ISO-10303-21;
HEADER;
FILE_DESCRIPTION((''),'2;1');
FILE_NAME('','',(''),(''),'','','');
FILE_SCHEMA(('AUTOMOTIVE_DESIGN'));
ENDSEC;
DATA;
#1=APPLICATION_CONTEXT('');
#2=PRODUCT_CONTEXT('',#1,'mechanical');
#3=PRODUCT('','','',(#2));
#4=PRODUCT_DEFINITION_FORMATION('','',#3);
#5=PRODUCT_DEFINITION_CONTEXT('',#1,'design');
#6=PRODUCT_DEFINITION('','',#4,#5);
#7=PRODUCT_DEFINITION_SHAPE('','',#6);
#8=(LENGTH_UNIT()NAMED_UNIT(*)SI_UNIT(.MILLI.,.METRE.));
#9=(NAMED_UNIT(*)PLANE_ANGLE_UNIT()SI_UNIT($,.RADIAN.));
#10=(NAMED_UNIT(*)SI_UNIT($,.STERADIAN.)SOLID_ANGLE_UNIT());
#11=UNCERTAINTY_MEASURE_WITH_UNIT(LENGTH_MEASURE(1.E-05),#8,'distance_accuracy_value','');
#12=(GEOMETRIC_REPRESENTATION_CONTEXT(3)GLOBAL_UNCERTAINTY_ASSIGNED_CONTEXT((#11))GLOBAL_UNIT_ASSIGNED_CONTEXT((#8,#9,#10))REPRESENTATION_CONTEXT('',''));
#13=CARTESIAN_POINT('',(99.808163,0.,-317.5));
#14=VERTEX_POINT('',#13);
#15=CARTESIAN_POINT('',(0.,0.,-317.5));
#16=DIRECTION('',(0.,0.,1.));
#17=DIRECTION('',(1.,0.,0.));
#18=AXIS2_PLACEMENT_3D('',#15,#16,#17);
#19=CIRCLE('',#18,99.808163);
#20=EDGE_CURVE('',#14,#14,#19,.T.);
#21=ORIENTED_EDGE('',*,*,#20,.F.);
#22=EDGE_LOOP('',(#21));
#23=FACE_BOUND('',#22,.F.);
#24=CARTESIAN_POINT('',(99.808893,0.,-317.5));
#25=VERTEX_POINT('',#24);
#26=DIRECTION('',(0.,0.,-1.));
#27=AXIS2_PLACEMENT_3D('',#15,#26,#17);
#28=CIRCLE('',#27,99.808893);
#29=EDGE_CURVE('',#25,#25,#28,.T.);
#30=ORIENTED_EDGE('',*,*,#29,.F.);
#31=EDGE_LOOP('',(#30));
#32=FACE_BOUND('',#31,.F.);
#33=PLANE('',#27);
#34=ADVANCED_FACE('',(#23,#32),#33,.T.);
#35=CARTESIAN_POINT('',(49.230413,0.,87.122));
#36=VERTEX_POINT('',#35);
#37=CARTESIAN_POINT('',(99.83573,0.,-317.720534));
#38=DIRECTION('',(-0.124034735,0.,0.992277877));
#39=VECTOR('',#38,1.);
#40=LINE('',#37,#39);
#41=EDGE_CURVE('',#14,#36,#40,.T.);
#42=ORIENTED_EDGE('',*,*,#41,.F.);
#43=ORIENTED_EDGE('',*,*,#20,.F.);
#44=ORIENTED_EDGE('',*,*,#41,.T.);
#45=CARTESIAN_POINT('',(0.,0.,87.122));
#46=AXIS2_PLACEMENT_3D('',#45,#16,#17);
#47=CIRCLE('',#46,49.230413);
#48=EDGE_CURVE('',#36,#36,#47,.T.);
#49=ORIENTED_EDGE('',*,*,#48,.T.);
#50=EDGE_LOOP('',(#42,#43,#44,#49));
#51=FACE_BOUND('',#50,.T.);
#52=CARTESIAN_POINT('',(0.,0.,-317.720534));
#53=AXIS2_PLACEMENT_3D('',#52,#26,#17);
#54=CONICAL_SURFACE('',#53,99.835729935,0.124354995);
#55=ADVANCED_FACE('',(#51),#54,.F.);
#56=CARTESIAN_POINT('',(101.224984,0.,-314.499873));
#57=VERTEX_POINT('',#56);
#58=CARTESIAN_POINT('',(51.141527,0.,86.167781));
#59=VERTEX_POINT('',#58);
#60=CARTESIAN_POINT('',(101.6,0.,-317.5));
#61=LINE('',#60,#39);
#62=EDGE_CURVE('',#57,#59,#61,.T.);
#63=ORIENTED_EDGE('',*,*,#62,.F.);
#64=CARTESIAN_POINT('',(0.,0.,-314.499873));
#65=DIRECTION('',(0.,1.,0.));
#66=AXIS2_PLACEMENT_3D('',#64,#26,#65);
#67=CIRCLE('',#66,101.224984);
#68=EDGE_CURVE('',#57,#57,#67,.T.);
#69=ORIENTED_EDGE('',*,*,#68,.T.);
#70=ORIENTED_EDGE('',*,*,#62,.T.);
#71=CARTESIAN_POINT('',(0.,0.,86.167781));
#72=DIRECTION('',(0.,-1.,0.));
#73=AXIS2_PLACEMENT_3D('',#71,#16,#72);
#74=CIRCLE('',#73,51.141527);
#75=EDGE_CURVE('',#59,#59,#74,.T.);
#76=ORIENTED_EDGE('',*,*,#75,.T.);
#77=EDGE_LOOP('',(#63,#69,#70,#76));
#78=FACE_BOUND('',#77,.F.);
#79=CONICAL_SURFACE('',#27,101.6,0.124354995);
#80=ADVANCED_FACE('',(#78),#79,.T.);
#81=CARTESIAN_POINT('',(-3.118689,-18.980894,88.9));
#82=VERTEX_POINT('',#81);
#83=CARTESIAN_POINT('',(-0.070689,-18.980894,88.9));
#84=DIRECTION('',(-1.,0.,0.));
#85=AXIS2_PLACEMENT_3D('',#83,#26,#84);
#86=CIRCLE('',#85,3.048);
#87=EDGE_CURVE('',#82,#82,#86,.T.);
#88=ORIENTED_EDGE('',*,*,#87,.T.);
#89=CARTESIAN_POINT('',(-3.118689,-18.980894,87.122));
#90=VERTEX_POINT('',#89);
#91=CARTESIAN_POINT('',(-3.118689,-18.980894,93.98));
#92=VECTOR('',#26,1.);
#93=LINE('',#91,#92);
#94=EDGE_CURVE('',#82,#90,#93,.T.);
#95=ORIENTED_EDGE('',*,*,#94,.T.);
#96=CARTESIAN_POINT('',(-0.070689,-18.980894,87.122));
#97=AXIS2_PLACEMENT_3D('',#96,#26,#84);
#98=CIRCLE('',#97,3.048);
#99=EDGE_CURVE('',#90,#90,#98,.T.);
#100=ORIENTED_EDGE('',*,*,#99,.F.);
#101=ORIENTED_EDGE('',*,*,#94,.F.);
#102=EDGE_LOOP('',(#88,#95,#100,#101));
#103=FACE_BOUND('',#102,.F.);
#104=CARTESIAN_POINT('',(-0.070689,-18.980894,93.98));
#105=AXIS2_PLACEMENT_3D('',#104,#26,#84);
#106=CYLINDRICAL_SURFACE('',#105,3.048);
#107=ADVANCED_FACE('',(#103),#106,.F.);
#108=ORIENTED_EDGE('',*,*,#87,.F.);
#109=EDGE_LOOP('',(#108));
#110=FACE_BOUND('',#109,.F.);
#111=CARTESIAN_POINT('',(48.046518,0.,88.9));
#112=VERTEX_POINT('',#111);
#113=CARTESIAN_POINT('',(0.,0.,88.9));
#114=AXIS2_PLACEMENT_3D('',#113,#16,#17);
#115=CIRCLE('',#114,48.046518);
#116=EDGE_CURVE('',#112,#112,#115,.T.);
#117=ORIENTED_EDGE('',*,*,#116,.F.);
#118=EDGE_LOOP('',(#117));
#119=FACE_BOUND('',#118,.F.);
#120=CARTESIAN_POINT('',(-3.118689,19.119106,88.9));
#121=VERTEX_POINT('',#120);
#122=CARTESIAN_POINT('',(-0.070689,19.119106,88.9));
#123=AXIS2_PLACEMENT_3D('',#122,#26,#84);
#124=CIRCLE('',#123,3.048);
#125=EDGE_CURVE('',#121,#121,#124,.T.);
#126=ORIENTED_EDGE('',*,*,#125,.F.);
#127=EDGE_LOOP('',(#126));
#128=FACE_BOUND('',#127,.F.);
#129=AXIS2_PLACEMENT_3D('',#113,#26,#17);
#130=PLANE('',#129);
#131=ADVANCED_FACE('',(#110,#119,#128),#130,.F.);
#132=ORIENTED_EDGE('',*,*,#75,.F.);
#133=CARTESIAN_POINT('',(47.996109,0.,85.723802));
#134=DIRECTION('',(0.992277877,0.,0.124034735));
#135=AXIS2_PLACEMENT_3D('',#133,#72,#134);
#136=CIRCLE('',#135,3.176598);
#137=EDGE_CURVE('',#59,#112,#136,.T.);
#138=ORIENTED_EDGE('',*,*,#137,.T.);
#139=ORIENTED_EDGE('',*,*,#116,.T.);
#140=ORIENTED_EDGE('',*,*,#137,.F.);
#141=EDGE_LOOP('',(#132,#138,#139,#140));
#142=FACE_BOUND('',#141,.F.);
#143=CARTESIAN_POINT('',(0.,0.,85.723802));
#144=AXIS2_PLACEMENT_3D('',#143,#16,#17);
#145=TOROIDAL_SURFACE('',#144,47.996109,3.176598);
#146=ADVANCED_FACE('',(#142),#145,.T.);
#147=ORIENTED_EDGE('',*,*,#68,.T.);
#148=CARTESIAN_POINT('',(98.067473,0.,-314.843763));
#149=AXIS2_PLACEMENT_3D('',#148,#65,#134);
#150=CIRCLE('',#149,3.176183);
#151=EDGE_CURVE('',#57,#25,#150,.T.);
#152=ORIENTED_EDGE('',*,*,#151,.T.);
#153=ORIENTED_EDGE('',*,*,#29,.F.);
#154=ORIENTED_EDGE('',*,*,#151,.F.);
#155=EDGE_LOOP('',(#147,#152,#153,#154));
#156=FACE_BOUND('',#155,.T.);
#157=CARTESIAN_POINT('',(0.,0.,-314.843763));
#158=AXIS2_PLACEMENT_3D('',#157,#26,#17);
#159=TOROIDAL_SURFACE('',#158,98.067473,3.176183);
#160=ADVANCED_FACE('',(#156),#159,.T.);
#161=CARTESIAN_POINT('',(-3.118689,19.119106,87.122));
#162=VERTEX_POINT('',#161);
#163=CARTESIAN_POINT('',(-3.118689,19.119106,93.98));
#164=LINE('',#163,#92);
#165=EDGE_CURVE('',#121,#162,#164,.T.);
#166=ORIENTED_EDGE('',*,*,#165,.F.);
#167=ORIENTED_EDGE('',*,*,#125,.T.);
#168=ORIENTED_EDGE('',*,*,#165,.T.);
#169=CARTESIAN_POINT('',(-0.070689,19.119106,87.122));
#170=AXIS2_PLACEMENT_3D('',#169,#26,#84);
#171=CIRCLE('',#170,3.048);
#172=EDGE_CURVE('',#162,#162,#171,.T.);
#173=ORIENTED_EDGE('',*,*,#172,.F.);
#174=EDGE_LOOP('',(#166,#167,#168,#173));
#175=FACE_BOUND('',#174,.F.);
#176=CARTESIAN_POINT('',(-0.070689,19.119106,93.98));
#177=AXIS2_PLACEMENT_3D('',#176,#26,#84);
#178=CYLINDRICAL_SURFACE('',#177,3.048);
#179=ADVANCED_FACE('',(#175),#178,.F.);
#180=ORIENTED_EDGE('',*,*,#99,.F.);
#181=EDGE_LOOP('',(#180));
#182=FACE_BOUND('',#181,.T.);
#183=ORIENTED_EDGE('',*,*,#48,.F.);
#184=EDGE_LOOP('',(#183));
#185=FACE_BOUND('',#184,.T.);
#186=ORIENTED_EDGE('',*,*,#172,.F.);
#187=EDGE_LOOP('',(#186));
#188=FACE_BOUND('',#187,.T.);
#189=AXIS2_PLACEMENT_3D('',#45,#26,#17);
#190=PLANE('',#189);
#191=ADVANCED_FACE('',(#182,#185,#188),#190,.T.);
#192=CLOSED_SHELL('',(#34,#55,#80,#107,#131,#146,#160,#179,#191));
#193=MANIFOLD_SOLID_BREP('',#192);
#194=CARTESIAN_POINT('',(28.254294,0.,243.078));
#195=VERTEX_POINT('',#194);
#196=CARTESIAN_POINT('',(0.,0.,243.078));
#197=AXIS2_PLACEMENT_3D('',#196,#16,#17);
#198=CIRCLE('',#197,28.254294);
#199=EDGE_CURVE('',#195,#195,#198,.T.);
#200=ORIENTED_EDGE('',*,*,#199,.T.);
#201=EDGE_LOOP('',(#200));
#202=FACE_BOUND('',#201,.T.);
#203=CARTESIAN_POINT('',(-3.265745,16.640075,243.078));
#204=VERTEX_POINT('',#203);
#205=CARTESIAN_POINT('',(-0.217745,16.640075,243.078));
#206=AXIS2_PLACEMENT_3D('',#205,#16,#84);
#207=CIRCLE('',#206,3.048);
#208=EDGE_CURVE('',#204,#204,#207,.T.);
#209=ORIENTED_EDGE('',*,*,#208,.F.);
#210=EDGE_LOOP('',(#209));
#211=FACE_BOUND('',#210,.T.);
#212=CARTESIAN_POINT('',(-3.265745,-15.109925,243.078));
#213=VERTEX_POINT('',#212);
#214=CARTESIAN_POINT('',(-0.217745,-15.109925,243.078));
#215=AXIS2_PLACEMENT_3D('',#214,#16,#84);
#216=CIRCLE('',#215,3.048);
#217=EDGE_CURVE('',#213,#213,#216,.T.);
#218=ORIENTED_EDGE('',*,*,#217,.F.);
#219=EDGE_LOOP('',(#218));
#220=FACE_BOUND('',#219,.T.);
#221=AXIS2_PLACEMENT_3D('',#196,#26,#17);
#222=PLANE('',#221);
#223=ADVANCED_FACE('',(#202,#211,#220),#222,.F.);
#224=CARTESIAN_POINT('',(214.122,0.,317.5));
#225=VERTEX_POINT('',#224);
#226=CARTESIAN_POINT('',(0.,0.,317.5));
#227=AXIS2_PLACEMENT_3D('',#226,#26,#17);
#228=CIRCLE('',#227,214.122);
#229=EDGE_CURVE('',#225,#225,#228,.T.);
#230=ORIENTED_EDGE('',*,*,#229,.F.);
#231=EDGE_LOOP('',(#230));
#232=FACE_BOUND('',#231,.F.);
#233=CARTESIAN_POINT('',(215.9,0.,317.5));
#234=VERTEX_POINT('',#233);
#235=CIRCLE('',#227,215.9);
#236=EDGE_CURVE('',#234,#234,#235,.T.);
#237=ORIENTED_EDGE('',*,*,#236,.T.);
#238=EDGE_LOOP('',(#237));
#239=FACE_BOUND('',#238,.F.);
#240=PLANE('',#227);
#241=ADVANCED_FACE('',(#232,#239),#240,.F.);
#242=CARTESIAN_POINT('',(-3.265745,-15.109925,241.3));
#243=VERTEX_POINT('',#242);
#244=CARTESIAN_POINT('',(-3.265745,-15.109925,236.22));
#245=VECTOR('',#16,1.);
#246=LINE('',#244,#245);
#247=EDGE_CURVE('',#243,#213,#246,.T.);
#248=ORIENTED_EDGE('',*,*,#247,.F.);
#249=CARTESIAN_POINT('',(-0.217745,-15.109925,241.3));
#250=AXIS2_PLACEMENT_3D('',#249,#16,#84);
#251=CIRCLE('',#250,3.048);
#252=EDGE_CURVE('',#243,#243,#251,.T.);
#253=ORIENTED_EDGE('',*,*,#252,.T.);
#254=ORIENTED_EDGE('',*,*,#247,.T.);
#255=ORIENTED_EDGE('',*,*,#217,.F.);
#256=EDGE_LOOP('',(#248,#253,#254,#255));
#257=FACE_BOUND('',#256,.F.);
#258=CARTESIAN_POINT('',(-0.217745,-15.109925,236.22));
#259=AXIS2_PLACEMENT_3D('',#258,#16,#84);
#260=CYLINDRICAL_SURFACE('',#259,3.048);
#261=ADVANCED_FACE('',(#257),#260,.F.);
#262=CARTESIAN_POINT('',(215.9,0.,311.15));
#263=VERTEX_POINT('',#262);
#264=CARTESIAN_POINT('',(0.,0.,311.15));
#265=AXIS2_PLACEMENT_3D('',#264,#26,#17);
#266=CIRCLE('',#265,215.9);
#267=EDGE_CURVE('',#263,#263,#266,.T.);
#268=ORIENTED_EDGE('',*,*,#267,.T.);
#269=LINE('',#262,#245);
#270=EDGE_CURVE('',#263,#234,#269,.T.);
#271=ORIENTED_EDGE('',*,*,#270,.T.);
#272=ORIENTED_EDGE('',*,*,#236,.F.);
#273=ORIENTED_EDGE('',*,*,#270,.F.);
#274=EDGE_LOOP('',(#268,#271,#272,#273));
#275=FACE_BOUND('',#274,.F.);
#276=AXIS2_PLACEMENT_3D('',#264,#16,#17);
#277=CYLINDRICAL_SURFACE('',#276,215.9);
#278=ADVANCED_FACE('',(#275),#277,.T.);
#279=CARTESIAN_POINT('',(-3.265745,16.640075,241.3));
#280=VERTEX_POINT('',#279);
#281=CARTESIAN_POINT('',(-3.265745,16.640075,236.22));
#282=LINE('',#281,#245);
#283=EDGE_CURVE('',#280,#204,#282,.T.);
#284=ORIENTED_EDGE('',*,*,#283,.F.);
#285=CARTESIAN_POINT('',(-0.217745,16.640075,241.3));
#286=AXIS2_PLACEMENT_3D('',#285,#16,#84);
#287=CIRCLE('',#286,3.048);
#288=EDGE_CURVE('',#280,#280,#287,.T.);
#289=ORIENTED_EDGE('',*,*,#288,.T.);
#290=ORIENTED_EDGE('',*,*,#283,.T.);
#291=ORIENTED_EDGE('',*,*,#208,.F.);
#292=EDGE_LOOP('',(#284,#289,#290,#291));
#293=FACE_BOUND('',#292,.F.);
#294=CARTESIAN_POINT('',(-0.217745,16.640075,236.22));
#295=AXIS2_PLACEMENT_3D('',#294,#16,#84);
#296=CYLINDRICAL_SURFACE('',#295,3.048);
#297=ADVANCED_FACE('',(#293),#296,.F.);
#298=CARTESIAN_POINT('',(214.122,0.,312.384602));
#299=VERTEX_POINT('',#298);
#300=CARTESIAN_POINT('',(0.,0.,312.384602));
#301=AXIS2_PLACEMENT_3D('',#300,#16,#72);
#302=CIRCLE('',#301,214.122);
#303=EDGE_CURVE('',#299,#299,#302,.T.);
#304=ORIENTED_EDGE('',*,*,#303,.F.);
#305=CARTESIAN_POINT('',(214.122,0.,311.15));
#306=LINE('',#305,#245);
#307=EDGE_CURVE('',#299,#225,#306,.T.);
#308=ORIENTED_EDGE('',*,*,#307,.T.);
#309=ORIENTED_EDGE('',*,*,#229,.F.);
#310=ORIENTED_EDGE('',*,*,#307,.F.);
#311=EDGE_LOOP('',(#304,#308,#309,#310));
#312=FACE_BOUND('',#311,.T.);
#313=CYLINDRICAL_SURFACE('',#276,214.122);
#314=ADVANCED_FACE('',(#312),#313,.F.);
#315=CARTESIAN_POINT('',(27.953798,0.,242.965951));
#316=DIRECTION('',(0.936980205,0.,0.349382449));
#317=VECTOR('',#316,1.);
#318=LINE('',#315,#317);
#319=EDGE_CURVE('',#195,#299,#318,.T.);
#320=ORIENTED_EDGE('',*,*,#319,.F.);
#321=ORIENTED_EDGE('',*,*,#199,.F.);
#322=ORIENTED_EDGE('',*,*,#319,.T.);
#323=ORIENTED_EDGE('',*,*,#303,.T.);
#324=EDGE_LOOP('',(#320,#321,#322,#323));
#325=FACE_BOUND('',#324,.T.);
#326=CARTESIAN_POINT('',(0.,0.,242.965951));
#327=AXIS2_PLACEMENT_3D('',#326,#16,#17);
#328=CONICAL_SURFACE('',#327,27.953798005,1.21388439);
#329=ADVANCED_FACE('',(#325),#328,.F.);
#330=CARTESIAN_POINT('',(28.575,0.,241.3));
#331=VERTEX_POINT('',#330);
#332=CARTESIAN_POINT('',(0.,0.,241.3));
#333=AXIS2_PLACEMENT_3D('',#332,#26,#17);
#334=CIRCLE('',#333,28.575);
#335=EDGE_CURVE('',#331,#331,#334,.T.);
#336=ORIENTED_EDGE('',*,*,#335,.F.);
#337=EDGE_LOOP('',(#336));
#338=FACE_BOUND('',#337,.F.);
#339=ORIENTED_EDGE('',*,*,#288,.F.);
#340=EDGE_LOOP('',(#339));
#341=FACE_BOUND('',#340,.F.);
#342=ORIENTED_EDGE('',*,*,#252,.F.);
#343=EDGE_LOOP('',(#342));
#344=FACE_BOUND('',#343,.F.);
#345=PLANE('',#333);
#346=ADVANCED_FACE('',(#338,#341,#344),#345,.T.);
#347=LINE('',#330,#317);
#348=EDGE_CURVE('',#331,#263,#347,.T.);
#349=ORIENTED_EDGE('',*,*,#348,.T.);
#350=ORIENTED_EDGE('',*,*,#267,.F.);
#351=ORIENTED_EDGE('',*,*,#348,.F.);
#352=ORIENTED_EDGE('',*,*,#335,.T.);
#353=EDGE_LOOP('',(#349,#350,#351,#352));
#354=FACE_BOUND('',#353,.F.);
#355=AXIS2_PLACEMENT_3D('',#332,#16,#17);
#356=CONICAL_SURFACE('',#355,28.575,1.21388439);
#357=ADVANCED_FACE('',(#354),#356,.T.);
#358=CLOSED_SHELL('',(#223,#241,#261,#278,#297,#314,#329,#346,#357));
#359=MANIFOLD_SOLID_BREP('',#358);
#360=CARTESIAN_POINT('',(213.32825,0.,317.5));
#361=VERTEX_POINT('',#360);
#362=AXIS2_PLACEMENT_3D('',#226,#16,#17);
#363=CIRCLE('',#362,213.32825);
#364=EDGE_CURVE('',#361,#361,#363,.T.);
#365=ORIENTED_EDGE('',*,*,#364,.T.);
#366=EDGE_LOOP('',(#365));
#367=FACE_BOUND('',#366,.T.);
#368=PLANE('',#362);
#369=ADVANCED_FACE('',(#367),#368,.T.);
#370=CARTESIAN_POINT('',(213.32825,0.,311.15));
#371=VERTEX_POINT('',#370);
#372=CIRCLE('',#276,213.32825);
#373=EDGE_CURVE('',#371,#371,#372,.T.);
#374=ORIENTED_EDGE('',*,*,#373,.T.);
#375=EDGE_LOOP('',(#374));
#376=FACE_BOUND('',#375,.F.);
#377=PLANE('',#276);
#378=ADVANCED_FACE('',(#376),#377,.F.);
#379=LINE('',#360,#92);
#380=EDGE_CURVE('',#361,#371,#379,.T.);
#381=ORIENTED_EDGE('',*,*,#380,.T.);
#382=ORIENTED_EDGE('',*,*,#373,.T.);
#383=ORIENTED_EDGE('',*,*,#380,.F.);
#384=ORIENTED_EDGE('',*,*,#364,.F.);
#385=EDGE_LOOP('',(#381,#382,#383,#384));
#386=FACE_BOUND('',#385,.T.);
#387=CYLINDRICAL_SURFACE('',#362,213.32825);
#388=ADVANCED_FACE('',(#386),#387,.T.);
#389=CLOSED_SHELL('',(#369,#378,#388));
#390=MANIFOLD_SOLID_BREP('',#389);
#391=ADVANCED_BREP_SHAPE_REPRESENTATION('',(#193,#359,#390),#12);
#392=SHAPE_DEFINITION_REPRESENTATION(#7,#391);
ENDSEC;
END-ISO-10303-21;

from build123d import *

# Parameters (mm, degrees)
F2_T      = -1.778
F3_T      = -1.778
F4_R      = 213.32825
F5_DEPTH  = 6.35
F8_D      = 6.096
F8_DEPTH  = 5.08
F8_TIP    = 1.8314231668
F10_D     = 6.096
F10_DEPTH = 5.08
F10_TIP   = 1.8314231668


# Not quite as in the source:
# - a fillet or chamfer that OpenCascade refuses, or shapes differently, is made with other operations: its cross-section is extruded or revolved along the edge and cut away or added


with BuildPart() as f1:
    # F0 (on Front) → F1 (revolve)
    with BuildSketch(Plane.XZ):
        Polygon((215.9, 311.15), (215.9, 317.5), (0, 317.5), (0, 241.3), (25.4, 241.3), (28.575, 241.3), align=None)
    revolve(axis=Axis((0, 0, 279.4), (0, 0, -1)))

    # F3
    f3_openings = [f1.faces().sort_by_distance(p)[0] for p in [
        (0, 0, 317.5),
    ]]
    offset(amount=F3_T, openings=f3_openings)

    # F8
    with Locations(Plane(origin=(0, 0, 241.3), x_dir=(1, 0, 0), z_dir=(0, 0, -1))):
        with Locations((-0.2177452552, 15.1099245586), (-0.2177452552, -16.6400754414)):
            Hole(F8_D / 2, depth=F8_DEPTH)
            with Locations((0, 0, -(F8_DEPTH + F8_TIP / 2))):  # 118° drill point
                Cone(0, F8_D / 2, F8_TIP, mode=Mode.SUBTRACT)


with BuildPart() as f1b:
    # F0 (on Front) → F1, piece 2 (revolve)
    with BuildSketch(Plane.XZ):
        Polygon((0, 88.9), (0, -317.5), (101.6, -317.5), (50.8, 88.9), (38.1, 88.9), align=None)
    revolve(axis=Axis((0, 0, 279.4), (0, 0, -1)))

    # F2
    f2_openings = [f1b.faces().sort_by_distance(p)[0] for p in [
        (0, 0, -317.5),
    ]]
    offset(amount=F2_T, openings=f2_openings)

    # F6: fillet of radius 3.175 on 2 edges, made by hand

    # F6_s1 → F6_t2 (revolve, cut)
    with BuildSketch(Plane.XZ):
        with BuildLine():
            ThreePointArc((51.1481767954, 86.1178105398), (50.0983895944, 88.1052282082), (47.9961089334, 88.9004))
            Line((47.9961089334, 88.9004), (47.9961089334, 89.2180597943))
            ThreePointArc((47.9961089334, 89.2180597943), (49.3980544667, 89.2176597943), (50.8, 89.2176597943))
            Line((50.8, 89.2176597943), (51.1152067862, 88.9394008483))
            ThreePointArc((51.1152067862, 88.9394008483), (51.2890967283, 87.5482813112), (51.4633835816, 86.1572113881))
            Line((51.4633835816, 86.1572113881), (51.1481767954, 86.1178105398))
        make_face()
    revolve(axis=Axis((0, 0, 88.9), (0, 0, -1)), mode=Mode.SUBTRACT)

    # F6_s3 → F6_t4 (revolve, cut)
    with BuildSketch(Plane.XZ):
        with BuildLine():
            ThreePointArc((101.2191288957, -314.4498062625), (100.9503066223, -316.1769576353), (99.8083824609, -317.5003345615))
            Line((99.8083824609, -317.5003345615), (99.9824734041, -317.7659916931))
            ThreePointArc((99.9824734041, -317.7659916931), (100.7041912305, -317.8176182741), (101.6, -317.8176182741))
            Line((101.6, -317.8176182741), (101.9151655866, -317.4606043017))
            ThreePointArc((101.9151655866, -317.4606043017), (101.7245315789, -315.9355322399), (101.5342944823, -314.4104105642))
            Line((101.5342944823, -314.4104105642), (101.2191288957, -314.4498062625))
        make_face()
    revolve(axis=Axis((0, 0, -317.5), (0, 0, -1)), mode=Mode.SUBTRACT)

    # F10
    with Locations(Plane.XY.offset(88.9)):
        with Locations((-0.0706888968, -18.9808944534), (-0.0706888968, 19.1191055466)):
            Hole(F10_D / 2, depth=F10_DEPTH)
            with Locations((0, 0, -(F10_DEPTH + F10_TIP / 2))):  # 118° drill point
                Cone(0, F10_D / 2, F10_TIP, mode=Mode.SUBTRACT)


with BuildPart() as f5:
    # F4 (on face) → F5 (new body)
    with BuildSketch(Plane.XY.offset(317.5)):
        Circle(F4_R)
    extrude(amount=-F5_DEPTH)


solid = Compound([f1.part, f1b.part, f5.part])
